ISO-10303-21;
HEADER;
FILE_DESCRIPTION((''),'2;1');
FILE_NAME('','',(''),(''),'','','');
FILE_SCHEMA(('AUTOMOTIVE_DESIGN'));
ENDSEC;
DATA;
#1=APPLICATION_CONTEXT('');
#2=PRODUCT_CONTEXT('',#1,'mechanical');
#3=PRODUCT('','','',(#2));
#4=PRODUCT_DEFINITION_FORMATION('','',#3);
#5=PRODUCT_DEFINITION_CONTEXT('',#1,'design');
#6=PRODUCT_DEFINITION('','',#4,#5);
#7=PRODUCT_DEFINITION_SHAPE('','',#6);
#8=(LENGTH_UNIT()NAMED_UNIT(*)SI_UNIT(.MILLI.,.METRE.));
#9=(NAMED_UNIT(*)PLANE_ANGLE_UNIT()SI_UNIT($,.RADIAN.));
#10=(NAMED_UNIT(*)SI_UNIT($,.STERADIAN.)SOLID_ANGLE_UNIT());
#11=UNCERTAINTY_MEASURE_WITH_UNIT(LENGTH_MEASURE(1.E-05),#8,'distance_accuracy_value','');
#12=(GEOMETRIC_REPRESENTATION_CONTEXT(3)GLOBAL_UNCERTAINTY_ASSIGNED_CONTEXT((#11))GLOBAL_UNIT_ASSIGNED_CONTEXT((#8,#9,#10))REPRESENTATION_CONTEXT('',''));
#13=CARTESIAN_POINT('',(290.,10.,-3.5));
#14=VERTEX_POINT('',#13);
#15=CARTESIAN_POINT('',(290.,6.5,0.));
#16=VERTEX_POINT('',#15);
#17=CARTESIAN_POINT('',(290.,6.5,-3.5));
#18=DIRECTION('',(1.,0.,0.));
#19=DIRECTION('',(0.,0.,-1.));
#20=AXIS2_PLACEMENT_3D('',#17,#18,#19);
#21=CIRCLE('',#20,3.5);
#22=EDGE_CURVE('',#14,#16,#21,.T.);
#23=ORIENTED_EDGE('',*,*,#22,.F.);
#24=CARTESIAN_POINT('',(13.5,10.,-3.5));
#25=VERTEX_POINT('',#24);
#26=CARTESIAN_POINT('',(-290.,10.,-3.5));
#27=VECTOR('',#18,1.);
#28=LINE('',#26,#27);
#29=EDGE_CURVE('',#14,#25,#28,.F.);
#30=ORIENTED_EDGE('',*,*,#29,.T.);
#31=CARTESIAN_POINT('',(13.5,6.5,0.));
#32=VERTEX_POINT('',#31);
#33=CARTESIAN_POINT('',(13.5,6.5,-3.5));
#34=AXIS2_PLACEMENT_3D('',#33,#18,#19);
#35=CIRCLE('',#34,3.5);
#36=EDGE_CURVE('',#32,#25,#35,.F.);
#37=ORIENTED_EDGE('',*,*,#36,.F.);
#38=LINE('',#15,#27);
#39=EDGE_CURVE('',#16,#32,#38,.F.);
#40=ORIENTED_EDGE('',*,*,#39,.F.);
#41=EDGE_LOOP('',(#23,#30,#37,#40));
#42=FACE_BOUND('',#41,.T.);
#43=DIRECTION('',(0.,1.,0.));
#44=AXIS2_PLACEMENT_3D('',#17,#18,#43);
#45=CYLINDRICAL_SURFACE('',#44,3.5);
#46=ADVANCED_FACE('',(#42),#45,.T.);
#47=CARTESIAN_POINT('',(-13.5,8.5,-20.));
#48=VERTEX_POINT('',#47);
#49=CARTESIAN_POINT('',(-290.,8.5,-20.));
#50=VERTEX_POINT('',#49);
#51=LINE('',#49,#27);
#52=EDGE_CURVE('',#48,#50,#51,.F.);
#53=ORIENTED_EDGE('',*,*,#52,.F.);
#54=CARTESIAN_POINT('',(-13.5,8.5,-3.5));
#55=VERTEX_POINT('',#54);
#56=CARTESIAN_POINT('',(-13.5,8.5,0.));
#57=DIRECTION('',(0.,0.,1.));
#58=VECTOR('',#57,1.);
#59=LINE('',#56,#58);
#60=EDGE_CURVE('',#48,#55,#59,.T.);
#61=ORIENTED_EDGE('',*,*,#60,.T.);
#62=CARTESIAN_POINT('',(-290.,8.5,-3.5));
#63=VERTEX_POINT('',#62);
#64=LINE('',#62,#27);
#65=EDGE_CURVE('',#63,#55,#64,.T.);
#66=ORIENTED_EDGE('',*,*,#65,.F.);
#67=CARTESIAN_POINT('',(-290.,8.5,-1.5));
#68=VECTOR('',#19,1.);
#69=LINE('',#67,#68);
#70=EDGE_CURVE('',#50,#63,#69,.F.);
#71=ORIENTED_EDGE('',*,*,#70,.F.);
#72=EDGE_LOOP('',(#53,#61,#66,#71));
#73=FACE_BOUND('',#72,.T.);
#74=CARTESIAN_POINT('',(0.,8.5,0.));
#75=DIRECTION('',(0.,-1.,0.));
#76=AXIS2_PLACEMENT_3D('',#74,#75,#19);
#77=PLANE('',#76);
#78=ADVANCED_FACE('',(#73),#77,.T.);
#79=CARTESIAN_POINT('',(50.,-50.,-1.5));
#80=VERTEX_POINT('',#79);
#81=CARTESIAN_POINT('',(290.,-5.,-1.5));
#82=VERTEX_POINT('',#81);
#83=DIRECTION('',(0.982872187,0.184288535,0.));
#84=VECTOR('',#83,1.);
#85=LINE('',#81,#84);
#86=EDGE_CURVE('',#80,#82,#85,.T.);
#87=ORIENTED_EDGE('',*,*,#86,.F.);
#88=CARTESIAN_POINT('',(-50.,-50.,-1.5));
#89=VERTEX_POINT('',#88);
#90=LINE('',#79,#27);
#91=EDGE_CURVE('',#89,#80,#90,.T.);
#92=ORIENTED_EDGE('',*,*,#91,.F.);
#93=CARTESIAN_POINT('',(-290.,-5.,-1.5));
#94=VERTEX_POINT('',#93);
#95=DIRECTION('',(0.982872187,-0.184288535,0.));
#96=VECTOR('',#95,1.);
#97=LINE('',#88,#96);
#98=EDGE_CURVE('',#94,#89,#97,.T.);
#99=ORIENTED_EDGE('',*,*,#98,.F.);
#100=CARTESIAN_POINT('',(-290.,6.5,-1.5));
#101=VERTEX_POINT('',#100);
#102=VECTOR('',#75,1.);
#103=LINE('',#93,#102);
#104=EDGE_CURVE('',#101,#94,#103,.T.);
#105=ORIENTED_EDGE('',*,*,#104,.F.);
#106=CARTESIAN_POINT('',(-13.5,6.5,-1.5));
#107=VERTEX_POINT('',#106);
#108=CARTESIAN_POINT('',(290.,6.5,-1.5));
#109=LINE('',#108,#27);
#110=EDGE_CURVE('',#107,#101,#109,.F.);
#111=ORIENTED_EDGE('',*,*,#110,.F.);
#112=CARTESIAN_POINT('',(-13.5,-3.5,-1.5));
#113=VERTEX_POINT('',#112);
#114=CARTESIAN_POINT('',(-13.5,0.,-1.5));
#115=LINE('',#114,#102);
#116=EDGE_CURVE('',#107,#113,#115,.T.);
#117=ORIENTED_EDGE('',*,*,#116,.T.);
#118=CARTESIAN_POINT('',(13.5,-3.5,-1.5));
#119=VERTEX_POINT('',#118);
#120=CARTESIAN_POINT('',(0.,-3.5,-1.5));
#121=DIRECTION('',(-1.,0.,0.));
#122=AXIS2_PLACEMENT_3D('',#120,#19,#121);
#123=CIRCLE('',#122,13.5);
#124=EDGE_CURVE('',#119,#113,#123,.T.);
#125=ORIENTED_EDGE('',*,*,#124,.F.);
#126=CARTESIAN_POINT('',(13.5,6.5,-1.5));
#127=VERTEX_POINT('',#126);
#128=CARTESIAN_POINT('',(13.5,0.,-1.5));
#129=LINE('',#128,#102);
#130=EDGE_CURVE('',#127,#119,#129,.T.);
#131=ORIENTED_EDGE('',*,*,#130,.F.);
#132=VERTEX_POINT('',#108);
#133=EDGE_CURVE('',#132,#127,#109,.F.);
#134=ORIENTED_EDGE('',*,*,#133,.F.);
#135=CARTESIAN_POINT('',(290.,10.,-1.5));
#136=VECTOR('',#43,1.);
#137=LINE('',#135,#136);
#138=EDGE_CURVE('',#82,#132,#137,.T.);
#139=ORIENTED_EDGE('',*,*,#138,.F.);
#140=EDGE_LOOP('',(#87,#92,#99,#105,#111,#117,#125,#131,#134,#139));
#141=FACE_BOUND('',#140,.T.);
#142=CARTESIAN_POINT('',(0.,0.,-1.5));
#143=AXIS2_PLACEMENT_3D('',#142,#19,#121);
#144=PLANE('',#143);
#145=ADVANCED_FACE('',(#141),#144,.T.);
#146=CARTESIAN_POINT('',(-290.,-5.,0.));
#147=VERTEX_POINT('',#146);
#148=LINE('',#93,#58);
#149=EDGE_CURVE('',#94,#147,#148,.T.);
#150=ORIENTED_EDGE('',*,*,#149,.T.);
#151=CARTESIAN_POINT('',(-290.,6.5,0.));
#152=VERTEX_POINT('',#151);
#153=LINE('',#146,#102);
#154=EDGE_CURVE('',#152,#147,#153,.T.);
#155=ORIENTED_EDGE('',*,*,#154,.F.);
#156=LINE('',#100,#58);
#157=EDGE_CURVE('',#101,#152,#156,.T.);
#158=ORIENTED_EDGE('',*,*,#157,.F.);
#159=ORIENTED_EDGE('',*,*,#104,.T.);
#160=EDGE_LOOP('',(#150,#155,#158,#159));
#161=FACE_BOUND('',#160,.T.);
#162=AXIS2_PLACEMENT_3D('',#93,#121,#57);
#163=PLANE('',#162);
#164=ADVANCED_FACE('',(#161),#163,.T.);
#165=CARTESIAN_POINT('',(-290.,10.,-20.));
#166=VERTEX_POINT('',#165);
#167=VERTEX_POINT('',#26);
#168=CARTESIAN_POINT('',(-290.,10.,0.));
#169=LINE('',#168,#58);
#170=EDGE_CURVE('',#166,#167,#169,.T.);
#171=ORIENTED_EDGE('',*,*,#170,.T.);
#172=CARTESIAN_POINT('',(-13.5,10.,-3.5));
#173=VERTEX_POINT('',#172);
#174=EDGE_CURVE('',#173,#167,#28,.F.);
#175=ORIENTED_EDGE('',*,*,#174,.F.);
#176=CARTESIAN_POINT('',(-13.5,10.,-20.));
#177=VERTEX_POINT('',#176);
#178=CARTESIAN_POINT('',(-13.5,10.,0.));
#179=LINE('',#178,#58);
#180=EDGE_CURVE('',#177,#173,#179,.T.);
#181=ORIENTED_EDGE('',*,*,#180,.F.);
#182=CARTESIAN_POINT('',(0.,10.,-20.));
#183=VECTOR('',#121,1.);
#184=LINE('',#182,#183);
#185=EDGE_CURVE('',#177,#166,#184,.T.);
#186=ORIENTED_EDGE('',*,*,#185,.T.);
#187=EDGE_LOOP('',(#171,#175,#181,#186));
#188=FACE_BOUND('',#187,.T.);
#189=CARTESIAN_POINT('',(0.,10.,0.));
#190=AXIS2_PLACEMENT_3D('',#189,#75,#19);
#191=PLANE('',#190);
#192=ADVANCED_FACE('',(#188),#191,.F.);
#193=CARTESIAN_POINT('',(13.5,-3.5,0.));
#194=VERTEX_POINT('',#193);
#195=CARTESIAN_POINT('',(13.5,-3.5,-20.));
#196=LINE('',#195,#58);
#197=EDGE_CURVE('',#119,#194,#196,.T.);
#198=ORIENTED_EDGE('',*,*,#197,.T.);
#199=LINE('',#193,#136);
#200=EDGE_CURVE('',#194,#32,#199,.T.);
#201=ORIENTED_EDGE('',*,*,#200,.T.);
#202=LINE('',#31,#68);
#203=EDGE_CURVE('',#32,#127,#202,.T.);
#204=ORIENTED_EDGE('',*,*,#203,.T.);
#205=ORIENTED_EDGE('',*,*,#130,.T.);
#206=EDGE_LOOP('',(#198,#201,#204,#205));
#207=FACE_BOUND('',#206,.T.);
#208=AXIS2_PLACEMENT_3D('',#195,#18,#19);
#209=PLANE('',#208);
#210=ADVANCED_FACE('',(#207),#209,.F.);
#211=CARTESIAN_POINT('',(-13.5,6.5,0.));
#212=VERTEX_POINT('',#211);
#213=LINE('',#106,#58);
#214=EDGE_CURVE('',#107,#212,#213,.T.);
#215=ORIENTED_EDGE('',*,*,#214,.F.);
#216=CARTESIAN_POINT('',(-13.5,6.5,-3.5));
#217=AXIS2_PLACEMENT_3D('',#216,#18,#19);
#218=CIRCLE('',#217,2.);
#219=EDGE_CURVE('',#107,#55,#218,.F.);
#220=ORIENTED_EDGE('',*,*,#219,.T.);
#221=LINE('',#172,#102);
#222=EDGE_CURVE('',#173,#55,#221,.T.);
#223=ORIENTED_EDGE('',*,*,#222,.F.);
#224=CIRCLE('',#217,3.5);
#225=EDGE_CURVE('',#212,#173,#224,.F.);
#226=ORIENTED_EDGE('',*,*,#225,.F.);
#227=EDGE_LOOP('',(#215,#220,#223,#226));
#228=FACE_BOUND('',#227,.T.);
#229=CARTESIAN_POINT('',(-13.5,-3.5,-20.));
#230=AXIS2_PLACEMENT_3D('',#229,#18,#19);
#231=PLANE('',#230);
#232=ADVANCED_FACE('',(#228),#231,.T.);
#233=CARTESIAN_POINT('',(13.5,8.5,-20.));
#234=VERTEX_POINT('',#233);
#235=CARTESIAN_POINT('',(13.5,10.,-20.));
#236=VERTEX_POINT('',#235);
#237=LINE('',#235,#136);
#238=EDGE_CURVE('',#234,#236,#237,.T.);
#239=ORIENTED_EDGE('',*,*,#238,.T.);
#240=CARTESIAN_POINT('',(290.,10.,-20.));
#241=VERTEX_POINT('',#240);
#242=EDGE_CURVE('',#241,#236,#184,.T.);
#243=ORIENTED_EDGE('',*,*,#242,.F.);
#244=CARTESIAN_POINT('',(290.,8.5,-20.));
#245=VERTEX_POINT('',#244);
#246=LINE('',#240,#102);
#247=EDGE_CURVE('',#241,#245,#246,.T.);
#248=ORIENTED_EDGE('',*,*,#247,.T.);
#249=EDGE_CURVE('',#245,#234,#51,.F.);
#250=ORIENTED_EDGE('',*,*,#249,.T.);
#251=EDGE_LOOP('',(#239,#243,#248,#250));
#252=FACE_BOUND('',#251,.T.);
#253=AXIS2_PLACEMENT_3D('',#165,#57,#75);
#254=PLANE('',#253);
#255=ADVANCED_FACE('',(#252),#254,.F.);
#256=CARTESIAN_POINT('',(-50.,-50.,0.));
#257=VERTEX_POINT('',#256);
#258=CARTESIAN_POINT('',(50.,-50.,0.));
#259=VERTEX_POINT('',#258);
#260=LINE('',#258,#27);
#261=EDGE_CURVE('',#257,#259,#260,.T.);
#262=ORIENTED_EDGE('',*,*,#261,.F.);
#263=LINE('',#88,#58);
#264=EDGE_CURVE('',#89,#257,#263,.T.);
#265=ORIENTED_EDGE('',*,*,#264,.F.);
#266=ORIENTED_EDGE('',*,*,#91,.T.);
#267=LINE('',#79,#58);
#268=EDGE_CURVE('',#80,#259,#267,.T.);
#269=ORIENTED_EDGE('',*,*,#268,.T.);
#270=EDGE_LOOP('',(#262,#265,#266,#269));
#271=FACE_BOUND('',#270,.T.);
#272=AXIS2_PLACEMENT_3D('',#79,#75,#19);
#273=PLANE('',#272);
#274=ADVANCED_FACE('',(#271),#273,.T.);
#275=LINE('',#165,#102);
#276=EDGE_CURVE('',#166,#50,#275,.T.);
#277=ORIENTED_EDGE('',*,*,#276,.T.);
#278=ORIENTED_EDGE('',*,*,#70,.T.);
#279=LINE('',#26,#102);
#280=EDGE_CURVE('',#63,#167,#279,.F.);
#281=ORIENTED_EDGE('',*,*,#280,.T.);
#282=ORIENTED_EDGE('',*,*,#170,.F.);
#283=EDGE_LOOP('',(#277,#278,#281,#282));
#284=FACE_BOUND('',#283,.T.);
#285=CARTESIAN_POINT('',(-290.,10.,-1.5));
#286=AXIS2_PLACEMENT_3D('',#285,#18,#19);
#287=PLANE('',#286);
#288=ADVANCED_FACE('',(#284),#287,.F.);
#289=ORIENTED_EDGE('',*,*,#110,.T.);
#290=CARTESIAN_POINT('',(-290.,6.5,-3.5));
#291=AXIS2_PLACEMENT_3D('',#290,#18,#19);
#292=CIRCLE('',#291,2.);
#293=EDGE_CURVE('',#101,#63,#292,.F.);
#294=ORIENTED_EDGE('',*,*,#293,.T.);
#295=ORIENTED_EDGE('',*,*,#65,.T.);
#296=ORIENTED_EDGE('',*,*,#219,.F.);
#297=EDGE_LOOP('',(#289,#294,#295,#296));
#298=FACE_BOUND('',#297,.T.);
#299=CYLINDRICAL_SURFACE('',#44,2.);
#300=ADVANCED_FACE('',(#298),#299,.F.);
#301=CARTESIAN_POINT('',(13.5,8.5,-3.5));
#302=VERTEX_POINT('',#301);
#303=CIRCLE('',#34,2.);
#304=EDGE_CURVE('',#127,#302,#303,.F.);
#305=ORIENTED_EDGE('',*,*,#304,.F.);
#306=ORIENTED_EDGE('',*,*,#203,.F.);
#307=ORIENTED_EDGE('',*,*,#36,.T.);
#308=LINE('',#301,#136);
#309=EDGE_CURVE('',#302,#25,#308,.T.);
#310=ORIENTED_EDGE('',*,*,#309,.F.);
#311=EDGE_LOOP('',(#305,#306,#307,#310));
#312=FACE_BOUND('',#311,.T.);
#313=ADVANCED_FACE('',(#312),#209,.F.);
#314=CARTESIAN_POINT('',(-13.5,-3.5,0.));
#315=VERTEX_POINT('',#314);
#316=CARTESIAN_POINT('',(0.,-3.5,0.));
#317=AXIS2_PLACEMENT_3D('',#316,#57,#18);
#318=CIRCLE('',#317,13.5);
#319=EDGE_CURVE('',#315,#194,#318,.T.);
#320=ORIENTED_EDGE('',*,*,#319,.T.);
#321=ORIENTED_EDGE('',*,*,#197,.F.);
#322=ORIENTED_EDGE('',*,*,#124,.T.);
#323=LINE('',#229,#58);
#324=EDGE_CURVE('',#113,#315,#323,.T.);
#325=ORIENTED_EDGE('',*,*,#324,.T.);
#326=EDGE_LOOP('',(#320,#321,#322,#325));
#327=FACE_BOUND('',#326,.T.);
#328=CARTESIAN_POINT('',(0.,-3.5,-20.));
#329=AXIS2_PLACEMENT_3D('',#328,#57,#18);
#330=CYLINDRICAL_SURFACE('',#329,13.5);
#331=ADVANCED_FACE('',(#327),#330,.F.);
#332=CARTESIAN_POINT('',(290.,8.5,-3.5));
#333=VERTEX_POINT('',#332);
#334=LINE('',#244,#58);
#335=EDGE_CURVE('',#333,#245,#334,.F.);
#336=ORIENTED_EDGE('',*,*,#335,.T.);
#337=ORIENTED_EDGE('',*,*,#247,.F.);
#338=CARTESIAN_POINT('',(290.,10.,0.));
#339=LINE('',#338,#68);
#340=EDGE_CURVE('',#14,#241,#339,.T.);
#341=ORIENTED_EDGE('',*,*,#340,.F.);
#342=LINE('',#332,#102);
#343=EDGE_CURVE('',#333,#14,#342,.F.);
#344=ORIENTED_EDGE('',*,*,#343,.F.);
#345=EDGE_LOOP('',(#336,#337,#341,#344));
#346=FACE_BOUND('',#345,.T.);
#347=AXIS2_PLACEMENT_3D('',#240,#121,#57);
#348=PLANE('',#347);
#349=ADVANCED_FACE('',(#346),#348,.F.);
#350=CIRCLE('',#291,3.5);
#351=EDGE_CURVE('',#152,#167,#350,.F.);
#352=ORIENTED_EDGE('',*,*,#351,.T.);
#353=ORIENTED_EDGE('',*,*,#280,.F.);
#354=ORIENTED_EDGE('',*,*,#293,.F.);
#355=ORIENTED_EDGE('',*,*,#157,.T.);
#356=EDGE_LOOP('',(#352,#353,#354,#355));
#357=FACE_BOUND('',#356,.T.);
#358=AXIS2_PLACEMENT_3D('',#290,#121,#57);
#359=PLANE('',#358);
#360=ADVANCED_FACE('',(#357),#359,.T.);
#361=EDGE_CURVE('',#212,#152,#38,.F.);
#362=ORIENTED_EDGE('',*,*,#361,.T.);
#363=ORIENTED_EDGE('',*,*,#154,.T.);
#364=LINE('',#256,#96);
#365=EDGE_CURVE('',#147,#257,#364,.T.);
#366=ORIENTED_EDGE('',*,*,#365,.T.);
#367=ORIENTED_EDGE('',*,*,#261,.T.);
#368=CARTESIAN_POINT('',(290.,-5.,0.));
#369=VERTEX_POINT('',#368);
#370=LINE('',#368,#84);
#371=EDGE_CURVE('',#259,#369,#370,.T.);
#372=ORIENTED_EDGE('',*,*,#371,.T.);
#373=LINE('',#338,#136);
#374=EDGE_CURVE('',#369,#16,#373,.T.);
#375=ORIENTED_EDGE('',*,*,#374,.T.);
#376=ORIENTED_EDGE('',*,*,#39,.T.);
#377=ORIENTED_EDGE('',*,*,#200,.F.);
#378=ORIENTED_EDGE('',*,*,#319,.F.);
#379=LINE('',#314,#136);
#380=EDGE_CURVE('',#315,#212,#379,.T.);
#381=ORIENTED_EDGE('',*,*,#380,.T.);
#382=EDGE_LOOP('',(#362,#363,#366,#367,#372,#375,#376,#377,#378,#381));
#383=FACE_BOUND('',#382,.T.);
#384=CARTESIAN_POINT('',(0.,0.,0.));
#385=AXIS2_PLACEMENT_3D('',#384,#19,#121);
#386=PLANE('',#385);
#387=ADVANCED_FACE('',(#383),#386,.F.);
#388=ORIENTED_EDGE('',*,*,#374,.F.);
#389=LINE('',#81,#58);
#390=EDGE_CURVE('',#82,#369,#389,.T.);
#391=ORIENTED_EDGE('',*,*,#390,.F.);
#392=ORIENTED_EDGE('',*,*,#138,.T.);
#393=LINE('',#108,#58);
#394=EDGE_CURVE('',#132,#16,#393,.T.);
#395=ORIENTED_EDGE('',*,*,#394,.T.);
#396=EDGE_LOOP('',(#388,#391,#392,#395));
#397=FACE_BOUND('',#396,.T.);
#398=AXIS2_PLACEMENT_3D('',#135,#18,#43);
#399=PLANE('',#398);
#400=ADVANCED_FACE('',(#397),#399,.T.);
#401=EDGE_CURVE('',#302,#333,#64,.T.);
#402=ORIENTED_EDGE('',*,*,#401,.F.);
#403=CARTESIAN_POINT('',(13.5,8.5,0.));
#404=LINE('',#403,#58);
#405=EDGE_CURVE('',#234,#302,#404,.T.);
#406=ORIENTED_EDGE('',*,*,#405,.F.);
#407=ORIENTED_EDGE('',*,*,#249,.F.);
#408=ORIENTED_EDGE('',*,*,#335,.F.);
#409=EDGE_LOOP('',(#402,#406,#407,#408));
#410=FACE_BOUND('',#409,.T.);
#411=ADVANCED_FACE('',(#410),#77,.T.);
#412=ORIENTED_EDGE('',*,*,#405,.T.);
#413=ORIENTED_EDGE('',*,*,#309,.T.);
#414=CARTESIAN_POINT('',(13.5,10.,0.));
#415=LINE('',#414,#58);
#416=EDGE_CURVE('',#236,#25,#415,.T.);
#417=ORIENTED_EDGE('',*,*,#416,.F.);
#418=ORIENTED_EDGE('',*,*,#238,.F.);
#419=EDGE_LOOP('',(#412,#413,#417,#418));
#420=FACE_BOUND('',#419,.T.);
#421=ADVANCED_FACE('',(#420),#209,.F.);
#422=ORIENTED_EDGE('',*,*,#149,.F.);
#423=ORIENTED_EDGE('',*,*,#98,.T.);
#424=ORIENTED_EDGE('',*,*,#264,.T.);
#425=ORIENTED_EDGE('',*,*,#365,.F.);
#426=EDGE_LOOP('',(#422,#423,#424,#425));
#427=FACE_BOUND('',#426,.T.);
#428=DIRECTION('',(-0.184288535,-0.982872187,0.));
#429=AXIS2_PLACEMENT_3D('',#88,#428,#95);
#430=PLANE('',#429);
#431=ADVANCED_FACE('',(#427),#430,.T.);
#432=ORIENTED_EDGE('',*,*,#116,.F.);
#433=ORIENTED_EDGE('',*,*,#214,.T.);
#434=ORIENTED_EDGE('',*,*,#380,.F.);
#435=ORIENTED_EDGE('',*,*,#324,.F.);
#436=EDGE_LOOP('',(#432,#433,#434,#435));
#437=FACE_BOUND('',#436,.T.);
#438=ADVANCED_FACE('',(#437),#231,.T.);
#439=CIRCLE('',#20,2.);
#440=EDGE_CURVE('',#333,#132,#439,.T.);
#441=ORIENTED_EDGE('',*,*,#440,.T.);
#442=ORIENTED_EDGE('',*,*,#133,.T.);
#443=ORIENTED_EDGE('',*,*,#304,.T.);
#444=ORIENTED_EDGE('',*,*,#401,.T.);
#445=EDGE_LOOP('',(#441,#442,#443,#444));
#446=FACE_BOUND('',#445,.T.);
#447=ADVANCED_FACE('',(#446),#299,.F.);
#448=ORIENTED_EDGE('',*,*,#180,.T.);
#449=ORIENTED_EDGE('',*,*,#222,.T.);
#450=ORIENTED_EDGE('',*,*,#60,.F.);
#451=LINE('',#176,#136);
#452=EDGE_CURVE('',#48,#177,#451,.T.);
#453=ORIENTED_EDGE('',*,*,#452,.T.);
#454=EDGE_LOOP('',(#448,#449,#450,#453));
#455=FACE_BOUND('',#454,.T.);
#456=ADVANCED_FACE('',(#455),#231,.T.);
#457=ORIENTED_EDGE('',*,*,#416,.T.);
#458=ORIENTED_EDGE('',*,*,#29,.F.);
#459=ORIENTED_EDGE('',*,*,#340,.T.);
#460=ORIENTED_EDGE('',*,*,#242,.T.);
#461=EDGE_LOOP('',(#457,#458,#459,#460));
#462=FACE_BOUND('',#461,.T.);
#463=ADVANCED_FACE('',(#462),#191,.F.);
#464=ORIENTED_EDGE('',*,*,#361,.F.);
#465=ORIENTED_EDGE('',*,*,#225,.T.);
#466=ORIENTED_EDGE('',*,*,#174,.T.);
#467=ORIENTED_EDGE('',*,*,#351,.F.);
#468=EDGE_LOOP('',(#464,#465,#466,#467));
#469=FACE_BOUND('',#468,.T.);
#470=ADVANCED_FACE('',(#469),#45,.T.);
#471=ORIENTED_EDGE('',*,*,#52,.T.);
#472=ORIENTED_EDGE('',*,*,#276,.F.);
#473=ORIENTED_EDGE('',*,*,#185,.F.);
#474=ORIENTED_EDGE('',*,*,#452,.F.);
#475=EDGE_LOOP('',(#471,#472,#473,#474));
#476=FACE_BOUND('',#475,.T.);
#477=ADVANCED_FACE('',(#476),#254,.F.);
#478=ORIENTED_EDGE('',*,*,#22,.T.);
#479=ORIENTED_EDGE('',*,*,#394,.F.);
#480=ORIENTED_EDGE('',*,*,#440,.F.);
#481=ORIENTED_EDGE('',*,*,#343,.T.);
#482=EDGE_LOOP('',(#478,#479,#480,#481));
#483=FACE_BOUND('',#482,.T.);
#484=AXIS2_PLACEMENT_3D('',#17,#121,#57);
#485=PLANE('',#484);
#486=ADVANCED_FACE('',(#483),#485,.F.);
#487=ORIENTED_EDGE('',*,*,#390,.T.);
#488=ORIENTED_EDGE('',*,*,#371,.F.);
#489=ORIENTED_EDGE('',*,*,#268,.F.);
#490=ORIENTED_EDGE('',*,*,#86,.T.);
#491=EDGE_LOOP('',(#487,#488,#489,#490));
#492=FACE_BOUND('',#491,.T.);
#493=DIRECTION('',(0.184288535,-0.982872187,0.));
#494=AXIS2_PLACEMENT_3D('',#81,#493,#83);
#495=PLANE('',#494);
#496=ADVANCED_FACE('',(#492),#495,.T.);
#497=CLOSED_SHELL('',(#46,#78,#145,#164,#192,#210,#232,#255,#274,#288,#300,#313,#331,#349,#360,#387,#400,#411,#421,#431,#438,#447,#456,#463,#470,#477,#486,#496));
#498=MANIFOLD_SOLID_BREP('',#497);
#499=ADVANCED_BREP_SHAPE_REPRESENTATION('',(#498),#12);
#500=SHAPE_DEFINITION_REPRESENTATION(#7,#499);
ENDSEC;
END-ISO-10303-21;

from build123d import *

# Parameters (mm, degrees)
BASE_FLANGE2_DEPTH           = 1.5
EDGE_FLANGE1_STRIP_W         = 10
EDGE_FLANGE1_STRIP_H         = 1.5
EDGE_FLANGE1_STRIP_CUT_DEPTH = 580
EDGE_FLANGE1_DEPTH           = 580
CUT_EXTRUDE1_DEPTH           = 295.957624075


# Sheet-metal steps are written as plain solids
with BuildPart() as part:
    # Sketch1 → Base-Flange2 (new body)
    with BuildSketch(Plane.XY):
        Polygon((-290, 10), (290, 10), (290, -5), (50, -50), (-50, -50), (-290, -5), align=None)
    extrude(amount=-BASE_FLANGE2_DEPTH)

    # Edge-Flange1 strip (across the edge) → Edge-Flange1 strip cut (cut)
    with BuildSketch(Plane(origin=(-290, 10, -1.5), x_dir=(0, -1, 0), z_dir=(1, 0, 0))):
        with Locations((-1.5, -0.75)):
            Rectangle(EDGE_FLANGE1_STRIP_W, EDGE_FLANGE1_STRIP_H)
    extrude(amount=EDGE_FLANGE1_STRIP_CUT_DEPTH, mode=Mode.SUBTRACT)

    # Edge-Flange1 section (across the edge) → Edge-Flange1 (add)
    with BuildSketch(Plane(origin=(-290, 10, -1.5), x_dir=(0, -1, 0), z_dir=(1, 0, 0))):
        with BuildLine():
            Line((0, 2), (0, 18.5))
            Line((0, 18.5), (1.5, 18.5))
            Line((1.5, 18.5), (1.5, 2))
            ThreePointArc((1.5, 2), (2.085786438, 0.585786438), (3.5, 0))
            Line((3.5, 0), (3.5, -1.5))
            ThreePointArc((3.5, -1.5), (1.025126266, -0.474873734), (0, 2))
        make_face()
    extrude(amount=EDGE_FLANGE1_DEPTH)

    # Sketch13 → Cut-Extrude1 (cut, through all)
    with BuildSketch(Plane.XY):
        with BuildLine():
            Line((-13.5, -3.5), (-13.5, 21.0126417))
            Line((-13.5, 21.0126417), (13.5, 21.0126417))
            Line((13.5, 21.0126417), (13.5, -3.5))
            ThreePointArc((13.5, -3.5), (0, -17), (-13.5, -3.5))
        make_face()
    extrude(amount=-CUT_EXTRUDE1_DEPTH, mode=Mode.SUBTRACT)


solid = part.part
